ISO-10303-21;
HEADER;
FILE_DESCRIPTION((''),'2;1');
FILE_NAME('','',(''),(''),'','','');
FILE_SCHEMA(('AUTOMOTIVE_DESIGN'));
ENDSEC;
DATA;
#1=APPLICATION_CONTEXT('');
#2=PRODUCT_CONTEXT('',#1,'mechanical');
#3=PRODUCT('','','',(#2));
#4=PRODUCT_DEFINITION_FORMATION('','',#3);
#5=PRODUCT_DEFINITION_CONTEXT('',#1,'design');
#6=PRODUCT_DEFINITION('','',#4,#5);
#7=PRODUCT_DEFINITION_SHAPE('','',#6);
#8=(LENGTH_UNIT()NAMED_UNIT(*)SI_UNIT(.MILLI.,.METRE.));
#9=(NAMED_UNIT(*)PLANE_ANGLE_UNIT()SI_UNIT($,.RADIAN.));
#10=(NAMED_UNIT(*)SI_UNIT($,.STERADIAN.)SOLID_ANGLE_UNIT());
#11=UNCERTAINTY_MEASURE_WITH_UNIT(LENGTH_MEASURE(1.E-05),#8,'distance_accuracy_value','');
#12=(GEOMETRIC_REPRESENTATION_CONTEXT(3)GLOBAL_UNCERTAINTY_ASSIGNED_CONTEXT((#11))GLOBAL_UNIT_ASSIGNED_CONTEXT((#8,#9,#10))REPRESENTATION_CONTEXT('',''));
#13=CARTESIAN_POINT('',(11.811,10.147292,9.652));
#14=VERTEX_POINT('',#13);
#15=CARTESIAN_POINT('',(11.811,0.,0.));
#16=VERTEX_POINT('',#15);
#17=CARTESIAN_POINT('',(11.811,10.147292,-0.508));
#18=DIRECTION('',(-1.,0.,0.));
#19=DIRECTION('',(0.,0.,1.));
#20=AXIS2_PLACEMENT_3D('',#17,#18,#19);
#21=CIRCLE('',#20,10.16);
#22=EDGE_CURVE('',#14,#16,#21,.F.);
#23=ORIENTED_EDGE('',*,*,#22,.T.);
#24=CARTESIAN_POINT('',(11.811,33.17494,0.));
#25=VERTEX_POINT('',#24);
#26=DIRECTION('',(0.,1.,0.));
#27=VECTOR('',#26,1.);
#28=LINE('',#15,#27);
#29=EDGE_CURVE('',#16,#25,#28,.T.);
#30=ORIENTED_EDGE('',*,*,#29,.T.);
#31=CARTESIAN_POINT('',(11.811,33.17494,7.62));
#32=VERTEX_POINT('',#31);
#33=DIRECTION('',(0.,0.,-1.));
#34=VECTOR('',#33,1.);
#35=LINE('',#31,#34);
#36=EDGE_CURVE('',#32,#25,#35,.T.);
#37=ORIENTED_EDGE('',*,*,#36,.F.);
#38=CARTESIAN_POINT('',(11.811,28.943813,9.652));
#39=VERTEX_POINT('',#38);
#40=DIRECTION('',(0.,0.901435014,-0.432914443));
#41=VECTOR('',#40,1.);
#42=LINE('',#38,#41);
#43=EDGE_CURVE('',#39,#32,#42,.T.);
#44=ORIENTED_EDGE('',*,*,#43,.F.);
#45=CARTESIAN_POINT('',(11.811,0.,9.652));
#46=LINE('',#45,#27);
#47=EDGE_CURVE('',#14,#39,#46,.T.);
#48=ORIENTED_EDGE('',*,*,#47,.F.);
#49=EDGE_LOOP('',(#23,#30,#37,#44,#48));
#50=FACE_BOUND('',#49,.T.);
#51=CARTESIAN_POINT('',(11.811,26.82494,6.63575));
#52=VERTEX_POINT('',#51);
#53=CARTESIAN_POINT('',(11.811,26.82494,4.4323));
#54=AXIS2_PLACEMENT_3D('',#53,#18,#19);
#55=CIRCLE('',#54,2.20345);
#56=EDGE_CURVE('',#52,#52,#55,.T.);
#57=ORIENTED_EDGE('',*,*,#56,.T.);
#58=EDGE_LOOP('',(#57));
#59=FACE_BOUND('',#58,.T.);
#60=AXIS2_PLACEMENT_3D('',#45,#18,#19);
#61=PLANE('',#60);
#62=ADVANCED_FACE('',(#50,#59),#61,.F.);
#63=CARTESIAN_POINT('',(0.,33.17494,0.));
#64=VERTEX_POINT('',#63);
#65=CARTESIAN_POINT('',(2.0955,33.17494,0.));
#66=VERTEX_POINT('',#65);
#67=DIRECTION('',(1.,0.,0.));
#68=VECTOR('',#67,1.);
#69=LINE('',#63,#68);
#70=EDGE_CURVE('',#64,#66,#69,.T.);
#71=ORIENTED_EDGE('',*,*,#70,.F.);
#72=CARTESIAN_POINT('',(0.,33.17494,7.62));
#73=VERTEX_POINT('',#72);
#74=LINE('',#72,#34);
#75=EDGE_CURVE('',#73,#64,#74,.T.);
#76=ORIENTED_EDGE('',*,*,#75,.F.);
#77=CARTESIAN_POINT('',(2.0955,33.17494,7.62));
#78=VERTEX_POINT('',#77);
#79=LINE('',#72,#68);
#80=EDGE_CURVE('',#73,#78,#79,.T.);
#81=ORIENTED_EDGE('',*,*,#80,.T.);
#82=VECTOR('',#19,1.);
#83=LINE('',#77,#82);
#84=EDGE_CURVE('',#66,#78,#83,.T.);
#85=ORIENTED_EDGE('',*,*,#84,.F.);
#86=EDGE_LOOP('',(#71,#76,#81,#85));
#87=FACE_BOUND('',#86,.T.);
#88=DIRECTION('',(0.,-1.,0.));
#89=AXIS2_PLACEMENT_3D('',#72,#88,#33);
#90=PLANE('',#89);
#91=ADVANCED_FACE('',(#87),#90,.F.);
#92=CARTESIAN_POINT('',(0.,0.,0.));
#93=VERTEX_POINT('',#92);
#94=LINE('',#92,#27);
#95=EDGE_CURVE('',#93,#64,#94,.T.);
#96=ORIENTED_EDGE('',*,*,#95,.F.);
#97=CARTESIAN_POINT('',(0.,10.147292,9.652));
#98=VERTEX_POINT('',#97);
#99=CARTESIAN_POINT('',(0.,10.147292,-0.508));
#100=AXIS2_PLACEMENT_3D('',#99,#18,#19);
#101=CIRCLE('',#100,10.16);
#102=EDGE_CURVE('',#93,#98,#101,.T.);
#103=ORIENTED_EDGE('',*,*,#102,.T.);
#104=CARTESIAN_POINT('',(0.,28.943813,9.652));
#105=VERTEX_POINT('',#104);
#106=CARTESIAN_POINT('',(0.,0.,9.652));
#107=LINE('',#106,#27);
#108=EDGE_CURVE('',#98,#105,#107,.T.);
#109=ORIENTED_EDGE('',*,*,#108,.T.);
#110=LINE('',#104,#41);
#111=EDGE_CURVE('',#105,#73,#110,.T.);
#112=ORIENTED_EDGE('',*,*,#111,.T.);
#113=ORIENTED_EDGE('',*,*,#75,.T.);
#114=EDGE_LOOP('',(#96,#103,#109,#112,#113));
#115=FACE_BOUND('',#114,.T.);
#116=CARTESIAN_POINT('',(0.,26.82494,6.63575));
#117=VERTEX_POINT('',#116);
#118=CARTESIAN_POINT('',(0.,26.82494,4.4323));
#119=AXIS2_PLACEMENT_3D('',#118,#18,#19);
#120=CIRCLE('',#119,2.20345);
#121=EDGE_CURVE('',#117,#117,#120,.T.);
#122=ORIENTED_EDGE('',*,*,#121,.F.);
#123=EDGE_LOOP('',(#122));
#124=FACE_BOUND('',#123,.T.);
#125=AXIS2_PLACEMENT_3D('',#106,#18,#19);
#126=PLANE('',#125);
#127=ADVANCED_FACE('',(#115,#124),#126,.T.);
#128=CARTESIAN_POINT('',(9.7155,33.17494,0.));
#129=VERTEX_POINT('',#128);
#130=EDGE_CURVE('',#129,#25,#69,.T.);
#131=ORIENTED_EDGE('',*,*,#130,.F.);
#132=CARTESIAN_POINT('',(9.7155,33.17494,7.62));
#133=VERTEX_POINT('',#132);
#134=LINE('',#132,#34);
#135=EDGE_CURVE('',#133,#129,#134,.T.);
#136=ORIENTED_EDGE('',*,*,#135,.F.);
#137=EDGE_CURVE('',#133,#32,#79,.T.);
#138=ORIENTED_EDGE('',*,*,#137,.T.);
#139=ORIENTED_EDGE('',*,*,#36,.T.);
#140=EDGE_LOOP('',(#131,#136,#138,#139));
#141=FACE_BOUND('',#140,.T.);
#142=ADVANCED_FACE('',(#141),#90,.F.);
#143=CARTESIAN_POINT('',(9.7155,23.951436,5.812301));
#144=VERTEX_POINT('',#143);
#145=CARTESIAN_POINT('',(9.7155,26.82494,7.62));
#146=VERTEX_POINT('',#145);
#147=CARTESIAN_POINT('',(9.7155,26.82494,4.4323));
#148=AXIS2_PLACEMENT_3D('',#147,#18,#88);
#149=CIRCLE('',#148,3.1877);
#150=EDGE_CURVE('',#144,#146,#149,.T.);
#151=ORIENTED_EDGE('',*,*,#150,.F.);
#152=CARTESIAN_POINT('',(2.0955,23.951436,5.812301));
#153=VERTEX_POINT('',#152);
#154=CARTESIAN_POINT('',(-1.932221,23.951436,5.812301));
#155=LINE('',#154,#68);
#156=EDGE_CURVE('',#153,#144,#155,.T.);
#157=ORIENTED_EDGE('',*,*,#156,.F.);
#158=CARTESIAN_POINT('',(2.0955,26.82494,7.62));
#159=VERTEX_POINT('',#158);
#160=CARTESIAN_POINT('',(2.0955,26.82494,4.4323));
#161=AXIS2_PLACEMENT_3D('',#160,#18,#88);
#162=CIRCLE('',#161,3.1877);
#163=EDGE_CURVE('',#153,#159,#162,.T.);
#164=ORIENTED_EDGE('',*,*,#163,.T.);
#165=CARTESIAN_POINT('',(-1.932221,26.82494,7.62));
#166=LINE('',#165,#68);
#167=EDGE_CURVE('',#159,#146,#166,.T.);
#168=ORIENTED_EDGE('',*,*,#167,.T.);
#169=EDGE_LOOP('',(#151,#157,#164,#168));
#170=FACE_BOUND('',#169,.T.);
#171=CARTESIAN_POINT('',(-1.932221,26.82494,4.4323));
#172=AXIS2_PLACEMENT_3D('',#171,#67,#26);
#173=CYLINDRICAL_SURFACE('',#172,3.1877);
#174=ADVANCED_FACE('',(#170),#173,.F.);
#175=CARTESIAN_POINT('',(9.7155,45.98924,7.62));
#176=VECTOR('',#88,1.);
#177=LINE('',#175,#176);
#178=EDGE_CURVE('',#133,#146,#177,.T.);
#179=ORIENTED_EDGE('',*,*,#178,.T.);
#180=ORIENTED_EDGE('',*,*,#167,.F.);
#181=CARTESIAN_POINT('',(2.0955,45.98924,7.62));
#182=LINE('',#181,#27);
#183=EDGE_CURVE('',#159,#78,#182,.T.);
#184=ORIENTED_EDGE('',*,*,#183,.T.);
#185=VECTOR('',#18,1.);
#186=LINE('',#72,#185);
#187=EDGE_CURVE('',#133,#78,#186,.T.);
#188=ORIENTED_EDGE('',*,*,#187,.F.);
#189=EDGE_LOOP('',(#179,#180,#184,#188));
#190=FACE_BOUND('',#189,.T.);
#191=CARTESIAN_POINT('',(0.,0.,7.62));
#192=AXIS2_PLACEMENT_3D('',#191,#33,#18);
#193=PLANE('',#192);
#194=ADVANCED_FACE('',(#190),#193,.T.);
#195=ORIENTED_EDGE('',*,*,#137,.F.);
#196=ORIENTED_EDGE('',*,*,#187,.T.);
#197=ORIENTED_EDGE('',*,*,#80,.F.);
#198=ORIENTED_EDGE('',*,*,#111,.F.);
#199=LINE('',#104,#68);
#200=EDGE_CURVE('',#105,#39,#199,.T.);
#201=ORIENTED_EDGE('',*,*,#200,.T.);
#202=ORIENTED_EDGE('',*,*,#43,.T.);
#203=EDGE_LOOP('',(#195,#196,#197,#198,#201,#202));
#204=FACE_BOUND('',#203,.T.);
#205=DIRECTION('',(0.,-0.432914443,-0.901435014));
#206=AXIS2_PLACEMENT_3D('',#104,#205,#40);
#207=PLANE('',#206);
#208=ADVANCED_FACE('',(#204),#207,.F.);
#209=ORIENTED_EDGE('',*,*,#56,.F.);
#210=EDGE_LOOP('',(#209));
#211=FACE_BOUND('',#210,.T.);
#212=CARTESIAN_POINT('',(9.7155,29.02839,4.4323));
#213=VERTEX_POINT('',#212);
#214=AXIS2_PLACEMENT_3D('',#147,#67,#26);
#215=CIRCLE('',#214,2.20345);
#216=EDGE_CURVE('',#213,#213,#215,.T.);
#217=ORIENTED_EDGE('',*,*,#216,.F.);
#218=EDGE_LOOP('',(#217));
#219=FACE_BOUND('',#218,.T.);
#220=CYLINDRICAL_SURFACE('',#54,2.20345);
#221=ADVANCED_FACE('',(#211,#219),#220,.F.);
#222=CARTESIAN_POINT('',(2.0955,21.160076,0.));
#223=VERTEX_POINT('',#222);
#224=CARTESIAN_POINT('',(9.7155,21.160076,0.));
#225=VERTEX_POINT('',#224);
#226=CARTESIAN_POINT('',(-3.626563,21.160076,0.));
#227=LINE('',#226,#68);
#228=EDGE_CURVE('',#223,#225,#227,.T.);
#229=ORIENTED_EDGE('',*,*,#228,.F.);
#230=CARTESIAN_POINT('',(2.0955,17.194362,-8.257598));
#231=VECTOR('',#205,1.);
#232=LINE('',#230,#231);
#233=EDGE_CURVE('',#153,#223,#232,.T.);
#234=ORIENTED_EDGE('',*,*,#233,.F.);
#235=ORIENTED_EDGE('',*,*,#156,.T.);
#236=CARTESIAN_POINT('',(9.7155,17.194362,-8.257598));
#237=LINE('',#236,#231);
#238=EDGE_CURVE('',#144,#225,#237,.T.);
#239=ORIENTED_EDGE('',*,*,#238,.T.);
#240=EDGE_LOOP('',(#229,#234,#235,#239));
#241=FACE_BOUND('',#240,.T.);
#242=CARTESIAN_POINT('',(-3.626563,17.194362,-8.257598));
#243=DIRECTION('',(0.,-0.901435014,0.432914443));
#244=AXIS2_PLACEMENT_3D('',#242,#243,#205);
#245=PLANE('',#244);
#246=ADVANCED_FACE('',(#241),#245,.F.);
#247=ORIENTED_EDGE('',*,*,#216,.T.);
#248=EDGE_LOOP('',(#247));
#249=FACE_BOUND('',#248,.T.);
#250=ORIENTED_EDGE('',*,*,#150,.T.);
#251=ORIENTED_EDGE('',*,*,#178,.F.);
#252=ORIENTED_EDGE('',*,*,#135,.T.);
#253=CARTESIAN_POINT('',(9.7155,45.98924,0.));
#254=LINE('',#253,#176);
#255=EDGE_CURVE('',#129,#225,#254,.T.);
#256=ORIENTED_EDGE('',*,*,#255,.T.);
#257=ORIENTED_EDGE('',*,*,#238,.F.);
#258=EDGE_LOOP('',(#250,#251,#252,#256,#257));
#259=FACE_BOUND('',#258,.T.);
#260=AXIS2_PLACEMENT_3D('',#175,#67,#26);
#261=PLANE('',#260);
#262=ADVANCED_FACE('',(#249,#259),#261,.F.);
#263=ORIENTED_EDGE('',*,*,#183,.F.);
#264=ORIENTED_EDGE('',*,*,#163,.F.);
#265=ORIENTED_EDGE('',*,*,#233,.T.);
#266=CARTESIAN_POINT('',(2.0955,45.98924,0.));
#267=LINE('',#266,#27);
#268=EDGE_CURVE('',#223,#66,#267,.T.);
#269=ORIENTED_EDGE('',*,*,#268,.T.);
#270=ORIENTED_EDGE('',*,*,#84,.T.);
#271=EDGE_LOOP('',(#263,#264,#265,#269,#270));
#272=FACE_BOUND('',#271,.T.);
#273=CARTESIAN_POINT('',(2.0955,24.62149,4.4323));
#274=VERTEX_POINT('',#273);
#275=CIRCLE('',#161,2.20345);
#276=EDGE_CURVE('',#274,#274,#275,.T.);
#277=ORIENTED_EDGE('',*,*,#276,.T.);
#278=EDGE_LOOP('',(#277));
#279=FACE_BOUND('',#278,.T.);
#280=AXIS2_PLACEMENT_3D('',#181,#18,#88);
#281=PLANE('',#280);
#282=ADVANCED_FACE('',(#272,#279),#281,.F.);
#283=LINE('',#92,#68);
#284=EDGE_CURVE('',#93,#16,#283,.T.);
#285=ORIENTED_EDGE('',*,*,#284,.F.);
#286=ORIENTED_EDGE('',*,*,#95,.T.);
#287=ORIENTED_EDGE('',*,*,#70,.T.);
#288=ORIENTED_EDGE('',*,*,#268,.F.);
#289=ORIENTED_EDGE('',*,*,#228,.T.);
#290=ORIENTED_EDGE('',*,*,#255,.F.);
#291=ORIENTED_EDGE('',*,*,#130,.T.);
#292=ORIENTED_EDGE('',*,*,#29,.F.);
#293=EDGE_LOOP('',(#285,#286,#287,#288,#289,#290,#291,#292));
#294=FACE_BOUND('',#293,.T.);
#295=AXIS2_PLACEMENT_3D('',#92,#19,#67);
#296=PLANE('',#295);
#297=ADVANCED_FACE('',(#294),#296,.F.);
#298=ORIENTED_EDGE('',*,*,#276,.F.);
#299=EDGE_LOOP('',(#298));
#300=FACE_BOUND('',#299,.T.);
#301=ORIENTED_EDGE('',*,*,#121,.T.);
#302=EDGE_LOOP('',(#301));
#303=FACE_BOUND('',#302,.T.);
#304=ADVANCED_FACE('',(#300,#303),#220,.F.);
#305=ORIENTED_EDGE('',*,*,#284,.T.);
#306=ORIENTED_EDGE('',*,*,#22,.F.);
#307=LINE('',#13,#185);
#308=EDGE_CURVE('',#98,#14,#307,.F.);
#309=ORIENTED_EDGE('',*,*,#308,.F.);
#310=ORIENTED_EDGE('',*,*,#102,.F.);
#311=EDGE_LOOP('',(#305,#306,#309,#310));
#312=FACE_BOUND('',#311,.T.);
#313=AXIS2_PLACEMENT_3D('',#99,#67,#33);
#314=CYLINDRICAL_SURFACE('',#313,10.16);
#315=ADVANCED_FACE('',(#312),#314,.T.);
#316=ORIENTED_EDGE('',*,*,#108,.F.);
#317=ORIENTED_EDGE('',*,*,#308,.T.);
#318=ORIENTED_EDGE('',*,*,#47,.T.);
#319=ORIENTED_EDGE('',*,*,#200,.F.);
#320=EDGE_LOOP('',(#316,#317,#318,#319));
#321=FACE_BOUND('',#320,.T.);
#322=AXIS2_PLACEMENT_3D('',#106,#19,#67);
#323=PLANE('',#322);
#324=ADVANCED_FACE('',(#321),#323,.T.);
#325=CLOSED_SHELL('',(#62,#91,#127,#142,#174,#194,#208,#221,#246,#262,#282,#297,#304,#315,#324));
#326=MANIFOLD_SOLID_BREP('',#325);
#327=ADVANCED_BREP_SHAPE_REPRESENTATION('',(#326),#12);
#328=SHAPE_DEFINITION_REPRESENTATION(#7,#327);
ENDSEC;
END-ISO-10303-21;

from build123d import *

# Parameters (mm, degrees)
SKETCH1_W               = 11.811
SKETCH1_H               = 45.98924
BOSS_EXTRUDE1_DEPTH     = 9.652
FILLET5_R               = 4.826
SKETCH2_W               = 7.62
SKETCH2_H               = 22.352
CUT_EXTRUDE1_DEPTH      = 7.62
CUT_EXTRUDE2_DEPTH      = 49.452771033
CUT_EXTRUDE2_DEPTH_BACK = 49.452771033
SKETCH3_R               = 2.20345
FILLET4_R               = 4.826
FILLET6_R               = 10.16
CUT_EXTRUDE3_DEPTH      = 49.452771033
CUT_EXTRUDE4_DEPTH      = 7.62
BOSS_EXTRUDE2_DEPTH     = 7.62


with BuildPart() as part:
    # Sketch1 → Boss-Extrude1 (new body)
    with BuildSketch(Plane.XY):
        with Locations((5.9055, 22.99462)):
            Rectangle(SKETCH1_W, SKETCH1_H)
    extrude(amount=BOSS_EXTRUDE1_DEPTH)

    # Fillet5
    fillet5_edges = [part.edges().sort_by_distance(p)[0] for p in [
        (5.9055, 45.98924, 0),
    ]]
    fillet(fillet5_edges, radius=FILLET5_R)

    # Sketch2 → Cut-Extrude1 (cut)
    with BuildSketch(Plane(origin=(0, 0, 0), x_dir=(-1, 0, 0), z_dir=(0, 0, -1))):
        with Locations((-5.9055, 34.81324)):
            Rectangle(SKETCH2_W, SKETCH2_H)
    extrude(amount=-CUT_EXTRUDE1_DEPTH, mode=Mode.SUBTRACT)

    # Sketch3 → Cut-Extrude2 (cut, two sides: drawn at the far end of the back side and taken through both)
    with BuildSketch(Plane.ZY.offset(-CUT_EXTRUDE2_DEPTH_BACK)):
        with Locations((4.4323, 26.82494)):
            Circle(SKETCH3_R)
    extrude(amount=CUT_EXTRUDE2_DEPTH + CUT_EXTRUDE2_DEPTH_BACK, mode=Mode.SUBTRACT)

    # Fillet4
    # the kernel refuses this fillet: 4.826 mm, written as the material it takes off along each edge
    with BuildSketch(Plane(origin=(23.876, 45.98924, 9.652), x_dir=(0, 0, -1), z_dir=(-1, 0, 0))) as fillet4_piece_1:
        with BuildLine():
            CenterArc((FILLET4_R, FILLET4_R), FILLET4_R, 180, 90)
            Line((0, FILLET4_R), (0, 0))
            Line((0, 0), (FILLET4_R, 0))
        make_face()
    extrude(amount=35.941, mode=Mode.SUBTRACT)

    # Fillet6
    # the kernel refuses this fillet: 10.16 mm, written as the material it takes off along each edge
    with BuildSketch(Plane(origin=(-25.368230131, 0, 9.652), x_dir=(0, 1, 0), z_dir=(1, 0, 0))) as fillet6_piece_1:
        with BuildLine():
            CenterArc((10.147292053, -10.16), FILLET6_R, 90, 87.134016017)
            Line((0, -9.652), (-0.202945841, -9.64184))
            ThreePointArc((-0.202945841, -9.64184), (-0.2032, -4.826), (-0.2032, 0))
            Line((-0.2032, 0), (0, 0.2032))
            Line((0, 0.2032), (10.147292053, 0.2032))
            Line((10.147292053, 0.2032), (10.147292053, 0))
        make_face()
    extrude(amount=62.547460263, mode=Mode.SUBTRACT)

    # Sketch4 → Cut-Extrude3 (cut, through all)
    with BuildSketch(Plane(origin=(11.811, 0, 0), x_dir=(0, 0, -1), z_dir=(1, 0, 0))):
        Polygon((-9.652, 28.943813088), (-7.62, 33.17494), (0, 33.17494), (0, 45.98924), (-9.652, 45.98924), align=None)
    extrude(amount=-CUT_EXTRUDE3_DEPTH, mode=Mode.SUBTRACT)

    # Sketch5 → Cut-Extrude4 (cut)
    with BuildSketch(Plane.ZY.offset(-9.7155)):
        Polygon((0, 21.160076085), (5.158068358, 23.63724), (0, 23.63724), align=None)
    extrude(amount=CUT_EXTRUDE4_DEPTH, mode=Mode.SUBTRACT)

    # Sketch5<3> → Boss-Extrude2 (add)
    with BuildSketch(Plane.ZY.offset(-9.7155)):
        with BuildLine():
            Line((5.812301369, 23.951435604), (5.158068358, 23.63724))
            Line((5.158068358, 23.63724), (7.62, 23.63724))
            Line((7.62, 23.63724), (7.62, 26.82494))
            ThreePointArc((7.62, 26.82494), (7.130490287, 25.127530072), (5.812301369, 23.951435604))
        make_face()
    extrude(amount=BOSS_EXTRUDE2_DEPTH)


solid = part.part
